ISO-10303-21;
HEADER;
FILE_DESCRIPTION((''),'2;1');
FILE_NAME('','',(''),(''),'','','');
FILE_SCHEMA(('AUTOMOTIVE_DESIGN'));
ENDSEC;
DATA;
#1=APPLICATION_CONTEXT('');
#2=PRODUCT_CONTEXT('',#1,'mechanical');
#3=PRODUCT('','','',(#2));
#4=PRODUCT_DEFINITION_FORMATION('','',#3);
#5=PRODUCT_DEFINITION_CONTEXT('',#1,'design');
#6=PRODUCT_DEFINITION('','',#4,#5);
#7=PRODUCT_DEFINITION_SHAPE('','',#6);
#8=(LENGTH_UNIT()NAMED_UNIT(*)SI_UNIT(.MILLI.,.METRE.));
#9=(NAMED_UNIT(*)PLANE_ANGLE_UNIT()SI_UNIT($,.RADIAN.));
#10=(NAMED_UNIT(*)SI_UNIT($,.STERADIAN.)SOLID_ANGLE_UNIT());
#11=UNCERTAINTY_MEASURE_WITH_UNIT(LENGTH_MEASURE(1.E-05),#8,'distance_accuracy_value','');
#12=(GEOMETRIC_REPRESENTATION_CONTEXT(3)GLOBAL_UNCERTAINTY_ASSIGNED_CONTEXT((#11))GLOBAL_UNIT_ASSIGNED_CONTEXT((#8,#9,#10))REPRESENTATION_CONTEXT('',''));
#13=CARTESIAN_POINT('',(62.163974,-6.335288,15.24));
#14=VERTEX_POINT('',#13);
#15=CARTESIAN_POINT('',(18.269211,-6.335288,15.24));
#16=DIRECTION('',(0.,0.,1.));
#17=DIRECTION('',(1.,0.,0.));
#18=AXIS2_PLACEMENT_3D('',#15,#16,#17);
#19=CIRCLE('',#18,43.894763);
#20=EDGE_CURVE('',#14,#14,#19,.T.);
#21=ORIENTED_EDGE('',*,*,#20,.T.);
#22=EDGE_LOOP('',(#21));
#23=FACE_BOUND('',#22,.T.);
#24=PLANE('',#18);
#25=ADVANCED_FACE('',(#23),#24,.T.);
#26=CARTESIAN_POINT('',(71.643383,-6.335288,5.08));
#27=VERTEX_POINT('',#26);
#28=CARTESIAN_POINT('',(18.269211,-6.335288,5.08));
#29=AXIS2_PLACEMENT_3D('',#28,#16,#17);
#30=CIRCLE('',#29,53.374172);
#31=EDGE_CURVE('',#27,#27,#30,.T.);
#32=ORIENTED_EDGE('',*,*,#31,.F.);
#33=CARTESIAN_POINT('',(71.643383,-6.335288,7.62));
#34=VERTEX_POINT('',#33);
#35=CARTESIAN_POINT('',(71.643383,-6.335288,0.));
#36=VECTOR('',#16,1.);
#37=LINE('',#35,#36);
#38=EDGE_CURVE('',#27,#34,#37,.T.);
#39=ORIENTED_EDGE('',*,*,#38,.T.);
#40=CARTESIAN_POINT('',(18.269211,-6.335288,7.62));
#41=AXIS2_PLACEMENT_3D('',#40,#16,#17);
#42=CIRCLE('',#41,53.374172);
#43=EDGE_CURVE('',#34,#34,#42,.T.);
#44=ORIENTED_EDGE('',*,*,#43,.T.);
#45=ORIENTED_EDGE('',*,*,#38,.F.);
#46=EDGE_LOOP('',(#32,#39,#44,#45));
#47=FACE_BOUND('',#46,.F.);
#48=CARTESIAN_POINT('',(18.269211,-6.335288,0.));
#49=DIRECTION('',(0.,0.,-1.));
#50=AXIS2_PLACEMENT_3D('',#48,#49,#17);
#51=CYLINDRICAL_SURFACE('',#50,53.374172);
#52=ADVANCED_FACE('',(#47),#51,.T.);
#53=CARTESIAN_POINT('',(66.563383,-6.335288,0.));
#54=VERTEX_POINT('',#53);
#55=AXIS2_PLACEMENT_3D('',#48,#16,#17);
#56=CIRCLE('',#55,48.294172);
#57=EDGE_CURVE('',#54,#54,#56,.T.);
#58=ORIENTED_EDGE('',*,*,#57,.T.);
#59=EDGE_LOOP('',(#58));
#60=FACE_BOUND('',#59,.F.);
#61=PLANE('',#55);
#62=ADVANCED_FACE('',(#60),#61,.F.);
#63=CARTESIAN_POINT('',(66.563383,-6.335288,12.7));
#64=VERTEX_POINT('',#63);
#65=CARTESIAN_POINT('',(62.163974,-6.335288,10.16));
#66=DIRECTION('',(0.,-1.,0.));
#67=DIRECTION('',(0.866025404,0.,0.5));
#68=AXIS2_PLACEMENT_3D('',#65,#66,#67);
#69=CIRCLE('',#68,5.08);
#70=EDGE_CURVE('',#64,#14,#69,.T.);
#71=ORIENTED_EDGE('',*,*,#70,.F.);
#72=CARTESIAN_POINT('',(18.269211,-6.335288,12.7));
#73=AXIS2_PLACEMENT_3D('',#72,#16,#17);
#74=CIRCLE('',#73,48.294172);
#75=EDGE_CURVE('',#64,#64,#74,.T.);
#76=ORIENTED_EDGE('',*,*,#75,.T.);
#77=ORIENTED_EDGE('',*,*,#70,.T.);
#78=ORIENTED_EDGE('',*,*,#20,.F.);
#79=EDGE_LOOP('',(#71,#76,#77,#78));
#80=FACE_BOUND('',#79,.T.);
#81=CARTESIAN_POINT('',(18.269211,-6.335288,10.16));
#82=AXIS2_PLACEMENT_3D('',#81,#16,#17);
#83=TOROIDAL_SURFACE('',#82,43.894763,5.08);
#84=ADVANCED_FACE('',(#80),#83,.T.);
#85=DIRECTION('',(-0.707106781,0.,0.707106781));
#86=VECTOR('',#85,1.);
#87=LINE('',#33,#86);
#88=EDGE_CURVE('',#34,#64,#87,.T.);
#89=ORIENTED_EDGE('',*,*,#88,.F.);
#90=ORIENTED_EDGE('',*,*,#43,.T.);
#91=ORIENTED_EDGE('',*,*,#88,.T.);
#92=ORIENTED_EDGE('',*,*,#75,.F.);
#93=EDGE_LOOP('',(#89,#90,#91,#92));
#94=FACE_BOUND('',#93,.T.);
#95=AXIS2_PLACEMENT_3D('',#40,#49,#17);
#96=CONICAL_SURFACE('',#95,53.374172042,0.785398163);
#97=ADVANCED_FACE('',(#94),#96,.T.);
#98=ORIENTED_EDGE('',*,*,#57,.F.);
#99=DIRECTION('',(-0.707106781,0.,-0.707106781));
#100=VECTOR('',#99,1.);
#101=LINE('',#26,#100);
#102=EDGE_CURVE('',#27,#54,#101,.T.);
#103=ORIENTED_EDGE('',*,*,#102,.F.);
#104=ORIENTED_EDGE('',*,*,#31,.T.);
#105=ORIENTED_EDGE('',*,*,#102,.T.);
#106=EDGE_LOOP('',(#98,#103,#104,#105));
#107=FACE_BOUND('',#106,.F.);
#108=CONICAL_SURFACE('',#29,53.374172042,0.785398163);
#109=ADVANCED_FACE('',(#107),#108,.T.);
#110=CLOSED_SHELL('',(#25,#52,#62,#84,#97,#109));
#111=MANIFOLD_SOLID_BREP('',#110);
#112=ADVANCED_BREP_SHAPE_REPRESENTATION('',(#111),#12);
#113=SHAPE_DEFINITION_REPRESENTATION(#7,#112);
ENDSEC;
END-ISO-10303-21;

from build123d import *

# Parameters (mm, degrees)
F0_R     = 53.3741720423
F1_DEPTH = 12.7
F2_SIZE  = 5.08
F3_DEPTH = 2.54


# Not quite as in the source:
# - a fillet or chamfer that OpenCascade refuses, or shapes differently, is made with other operations: its cross-section is extruded or revolved along the edge and cut away or added


with BuildPart() as f1:
    # F0 (on Top) → F1 (new body)
    with BuildSketch(Plane.XY):
        with Locations((18.2692110538, -6.3352882862)):
            Circle(F0_R)
    extrude(amount=F1_DEPTH)

    # F2
    f2_edges = [f1.edges().sort_by_distance(p)[0] for p in [
        (-35.104961, -6.335288, 12.7),
        (-35.104961, -6.335288, 0),
        (71.643383, -6.335288, 6.35),
    ]]
    chamfer(f2_edges, length=F2_SIZE)

    # F3 (add): a face of the model
    f3_faces = [f1.faces().sort_by_distance(p)[0] for p in [
        (18.2692110538, -6.3352882862, 12.7),
    ]]
    extrude(f3_faces, amount=F3_DEPTH)

    # F4: fillet of radius 5.08 on 1 edges, made by hand

    # F4_s1 → F4_t2 (revolve, cut)
    with BuildSketch(Plane.XZ.offset(6.3352882862)):
        with BuildLine():
            ThreePointArc((66.5633830961, 12.7), (64.7039740449, 14.5594090512), (62.1639740449, 15.24))
            Line((62.1639740449, 15.24), (62.1639740449, 15.3416))
            Line((62.1639740449, 15.3416), (66.5633830961, 15.3416))
            Line((66.5633830961, 15.3416), (66.6649830961, 15.24))
            ThreePointArc((66.6649830961, 15.24), (66.6649830961, 13.97), (66.6513712772, 12.7508))
            Line((66.6513712772, 12.7508), (66.5633830961, 12.7))
        make_face()
    revolve(axis=Axis((18.2692110538, -6.3352882862, 15.24), (0, 0, 1)), mode=Mode.SUBTRACT)


solid = f1.part
